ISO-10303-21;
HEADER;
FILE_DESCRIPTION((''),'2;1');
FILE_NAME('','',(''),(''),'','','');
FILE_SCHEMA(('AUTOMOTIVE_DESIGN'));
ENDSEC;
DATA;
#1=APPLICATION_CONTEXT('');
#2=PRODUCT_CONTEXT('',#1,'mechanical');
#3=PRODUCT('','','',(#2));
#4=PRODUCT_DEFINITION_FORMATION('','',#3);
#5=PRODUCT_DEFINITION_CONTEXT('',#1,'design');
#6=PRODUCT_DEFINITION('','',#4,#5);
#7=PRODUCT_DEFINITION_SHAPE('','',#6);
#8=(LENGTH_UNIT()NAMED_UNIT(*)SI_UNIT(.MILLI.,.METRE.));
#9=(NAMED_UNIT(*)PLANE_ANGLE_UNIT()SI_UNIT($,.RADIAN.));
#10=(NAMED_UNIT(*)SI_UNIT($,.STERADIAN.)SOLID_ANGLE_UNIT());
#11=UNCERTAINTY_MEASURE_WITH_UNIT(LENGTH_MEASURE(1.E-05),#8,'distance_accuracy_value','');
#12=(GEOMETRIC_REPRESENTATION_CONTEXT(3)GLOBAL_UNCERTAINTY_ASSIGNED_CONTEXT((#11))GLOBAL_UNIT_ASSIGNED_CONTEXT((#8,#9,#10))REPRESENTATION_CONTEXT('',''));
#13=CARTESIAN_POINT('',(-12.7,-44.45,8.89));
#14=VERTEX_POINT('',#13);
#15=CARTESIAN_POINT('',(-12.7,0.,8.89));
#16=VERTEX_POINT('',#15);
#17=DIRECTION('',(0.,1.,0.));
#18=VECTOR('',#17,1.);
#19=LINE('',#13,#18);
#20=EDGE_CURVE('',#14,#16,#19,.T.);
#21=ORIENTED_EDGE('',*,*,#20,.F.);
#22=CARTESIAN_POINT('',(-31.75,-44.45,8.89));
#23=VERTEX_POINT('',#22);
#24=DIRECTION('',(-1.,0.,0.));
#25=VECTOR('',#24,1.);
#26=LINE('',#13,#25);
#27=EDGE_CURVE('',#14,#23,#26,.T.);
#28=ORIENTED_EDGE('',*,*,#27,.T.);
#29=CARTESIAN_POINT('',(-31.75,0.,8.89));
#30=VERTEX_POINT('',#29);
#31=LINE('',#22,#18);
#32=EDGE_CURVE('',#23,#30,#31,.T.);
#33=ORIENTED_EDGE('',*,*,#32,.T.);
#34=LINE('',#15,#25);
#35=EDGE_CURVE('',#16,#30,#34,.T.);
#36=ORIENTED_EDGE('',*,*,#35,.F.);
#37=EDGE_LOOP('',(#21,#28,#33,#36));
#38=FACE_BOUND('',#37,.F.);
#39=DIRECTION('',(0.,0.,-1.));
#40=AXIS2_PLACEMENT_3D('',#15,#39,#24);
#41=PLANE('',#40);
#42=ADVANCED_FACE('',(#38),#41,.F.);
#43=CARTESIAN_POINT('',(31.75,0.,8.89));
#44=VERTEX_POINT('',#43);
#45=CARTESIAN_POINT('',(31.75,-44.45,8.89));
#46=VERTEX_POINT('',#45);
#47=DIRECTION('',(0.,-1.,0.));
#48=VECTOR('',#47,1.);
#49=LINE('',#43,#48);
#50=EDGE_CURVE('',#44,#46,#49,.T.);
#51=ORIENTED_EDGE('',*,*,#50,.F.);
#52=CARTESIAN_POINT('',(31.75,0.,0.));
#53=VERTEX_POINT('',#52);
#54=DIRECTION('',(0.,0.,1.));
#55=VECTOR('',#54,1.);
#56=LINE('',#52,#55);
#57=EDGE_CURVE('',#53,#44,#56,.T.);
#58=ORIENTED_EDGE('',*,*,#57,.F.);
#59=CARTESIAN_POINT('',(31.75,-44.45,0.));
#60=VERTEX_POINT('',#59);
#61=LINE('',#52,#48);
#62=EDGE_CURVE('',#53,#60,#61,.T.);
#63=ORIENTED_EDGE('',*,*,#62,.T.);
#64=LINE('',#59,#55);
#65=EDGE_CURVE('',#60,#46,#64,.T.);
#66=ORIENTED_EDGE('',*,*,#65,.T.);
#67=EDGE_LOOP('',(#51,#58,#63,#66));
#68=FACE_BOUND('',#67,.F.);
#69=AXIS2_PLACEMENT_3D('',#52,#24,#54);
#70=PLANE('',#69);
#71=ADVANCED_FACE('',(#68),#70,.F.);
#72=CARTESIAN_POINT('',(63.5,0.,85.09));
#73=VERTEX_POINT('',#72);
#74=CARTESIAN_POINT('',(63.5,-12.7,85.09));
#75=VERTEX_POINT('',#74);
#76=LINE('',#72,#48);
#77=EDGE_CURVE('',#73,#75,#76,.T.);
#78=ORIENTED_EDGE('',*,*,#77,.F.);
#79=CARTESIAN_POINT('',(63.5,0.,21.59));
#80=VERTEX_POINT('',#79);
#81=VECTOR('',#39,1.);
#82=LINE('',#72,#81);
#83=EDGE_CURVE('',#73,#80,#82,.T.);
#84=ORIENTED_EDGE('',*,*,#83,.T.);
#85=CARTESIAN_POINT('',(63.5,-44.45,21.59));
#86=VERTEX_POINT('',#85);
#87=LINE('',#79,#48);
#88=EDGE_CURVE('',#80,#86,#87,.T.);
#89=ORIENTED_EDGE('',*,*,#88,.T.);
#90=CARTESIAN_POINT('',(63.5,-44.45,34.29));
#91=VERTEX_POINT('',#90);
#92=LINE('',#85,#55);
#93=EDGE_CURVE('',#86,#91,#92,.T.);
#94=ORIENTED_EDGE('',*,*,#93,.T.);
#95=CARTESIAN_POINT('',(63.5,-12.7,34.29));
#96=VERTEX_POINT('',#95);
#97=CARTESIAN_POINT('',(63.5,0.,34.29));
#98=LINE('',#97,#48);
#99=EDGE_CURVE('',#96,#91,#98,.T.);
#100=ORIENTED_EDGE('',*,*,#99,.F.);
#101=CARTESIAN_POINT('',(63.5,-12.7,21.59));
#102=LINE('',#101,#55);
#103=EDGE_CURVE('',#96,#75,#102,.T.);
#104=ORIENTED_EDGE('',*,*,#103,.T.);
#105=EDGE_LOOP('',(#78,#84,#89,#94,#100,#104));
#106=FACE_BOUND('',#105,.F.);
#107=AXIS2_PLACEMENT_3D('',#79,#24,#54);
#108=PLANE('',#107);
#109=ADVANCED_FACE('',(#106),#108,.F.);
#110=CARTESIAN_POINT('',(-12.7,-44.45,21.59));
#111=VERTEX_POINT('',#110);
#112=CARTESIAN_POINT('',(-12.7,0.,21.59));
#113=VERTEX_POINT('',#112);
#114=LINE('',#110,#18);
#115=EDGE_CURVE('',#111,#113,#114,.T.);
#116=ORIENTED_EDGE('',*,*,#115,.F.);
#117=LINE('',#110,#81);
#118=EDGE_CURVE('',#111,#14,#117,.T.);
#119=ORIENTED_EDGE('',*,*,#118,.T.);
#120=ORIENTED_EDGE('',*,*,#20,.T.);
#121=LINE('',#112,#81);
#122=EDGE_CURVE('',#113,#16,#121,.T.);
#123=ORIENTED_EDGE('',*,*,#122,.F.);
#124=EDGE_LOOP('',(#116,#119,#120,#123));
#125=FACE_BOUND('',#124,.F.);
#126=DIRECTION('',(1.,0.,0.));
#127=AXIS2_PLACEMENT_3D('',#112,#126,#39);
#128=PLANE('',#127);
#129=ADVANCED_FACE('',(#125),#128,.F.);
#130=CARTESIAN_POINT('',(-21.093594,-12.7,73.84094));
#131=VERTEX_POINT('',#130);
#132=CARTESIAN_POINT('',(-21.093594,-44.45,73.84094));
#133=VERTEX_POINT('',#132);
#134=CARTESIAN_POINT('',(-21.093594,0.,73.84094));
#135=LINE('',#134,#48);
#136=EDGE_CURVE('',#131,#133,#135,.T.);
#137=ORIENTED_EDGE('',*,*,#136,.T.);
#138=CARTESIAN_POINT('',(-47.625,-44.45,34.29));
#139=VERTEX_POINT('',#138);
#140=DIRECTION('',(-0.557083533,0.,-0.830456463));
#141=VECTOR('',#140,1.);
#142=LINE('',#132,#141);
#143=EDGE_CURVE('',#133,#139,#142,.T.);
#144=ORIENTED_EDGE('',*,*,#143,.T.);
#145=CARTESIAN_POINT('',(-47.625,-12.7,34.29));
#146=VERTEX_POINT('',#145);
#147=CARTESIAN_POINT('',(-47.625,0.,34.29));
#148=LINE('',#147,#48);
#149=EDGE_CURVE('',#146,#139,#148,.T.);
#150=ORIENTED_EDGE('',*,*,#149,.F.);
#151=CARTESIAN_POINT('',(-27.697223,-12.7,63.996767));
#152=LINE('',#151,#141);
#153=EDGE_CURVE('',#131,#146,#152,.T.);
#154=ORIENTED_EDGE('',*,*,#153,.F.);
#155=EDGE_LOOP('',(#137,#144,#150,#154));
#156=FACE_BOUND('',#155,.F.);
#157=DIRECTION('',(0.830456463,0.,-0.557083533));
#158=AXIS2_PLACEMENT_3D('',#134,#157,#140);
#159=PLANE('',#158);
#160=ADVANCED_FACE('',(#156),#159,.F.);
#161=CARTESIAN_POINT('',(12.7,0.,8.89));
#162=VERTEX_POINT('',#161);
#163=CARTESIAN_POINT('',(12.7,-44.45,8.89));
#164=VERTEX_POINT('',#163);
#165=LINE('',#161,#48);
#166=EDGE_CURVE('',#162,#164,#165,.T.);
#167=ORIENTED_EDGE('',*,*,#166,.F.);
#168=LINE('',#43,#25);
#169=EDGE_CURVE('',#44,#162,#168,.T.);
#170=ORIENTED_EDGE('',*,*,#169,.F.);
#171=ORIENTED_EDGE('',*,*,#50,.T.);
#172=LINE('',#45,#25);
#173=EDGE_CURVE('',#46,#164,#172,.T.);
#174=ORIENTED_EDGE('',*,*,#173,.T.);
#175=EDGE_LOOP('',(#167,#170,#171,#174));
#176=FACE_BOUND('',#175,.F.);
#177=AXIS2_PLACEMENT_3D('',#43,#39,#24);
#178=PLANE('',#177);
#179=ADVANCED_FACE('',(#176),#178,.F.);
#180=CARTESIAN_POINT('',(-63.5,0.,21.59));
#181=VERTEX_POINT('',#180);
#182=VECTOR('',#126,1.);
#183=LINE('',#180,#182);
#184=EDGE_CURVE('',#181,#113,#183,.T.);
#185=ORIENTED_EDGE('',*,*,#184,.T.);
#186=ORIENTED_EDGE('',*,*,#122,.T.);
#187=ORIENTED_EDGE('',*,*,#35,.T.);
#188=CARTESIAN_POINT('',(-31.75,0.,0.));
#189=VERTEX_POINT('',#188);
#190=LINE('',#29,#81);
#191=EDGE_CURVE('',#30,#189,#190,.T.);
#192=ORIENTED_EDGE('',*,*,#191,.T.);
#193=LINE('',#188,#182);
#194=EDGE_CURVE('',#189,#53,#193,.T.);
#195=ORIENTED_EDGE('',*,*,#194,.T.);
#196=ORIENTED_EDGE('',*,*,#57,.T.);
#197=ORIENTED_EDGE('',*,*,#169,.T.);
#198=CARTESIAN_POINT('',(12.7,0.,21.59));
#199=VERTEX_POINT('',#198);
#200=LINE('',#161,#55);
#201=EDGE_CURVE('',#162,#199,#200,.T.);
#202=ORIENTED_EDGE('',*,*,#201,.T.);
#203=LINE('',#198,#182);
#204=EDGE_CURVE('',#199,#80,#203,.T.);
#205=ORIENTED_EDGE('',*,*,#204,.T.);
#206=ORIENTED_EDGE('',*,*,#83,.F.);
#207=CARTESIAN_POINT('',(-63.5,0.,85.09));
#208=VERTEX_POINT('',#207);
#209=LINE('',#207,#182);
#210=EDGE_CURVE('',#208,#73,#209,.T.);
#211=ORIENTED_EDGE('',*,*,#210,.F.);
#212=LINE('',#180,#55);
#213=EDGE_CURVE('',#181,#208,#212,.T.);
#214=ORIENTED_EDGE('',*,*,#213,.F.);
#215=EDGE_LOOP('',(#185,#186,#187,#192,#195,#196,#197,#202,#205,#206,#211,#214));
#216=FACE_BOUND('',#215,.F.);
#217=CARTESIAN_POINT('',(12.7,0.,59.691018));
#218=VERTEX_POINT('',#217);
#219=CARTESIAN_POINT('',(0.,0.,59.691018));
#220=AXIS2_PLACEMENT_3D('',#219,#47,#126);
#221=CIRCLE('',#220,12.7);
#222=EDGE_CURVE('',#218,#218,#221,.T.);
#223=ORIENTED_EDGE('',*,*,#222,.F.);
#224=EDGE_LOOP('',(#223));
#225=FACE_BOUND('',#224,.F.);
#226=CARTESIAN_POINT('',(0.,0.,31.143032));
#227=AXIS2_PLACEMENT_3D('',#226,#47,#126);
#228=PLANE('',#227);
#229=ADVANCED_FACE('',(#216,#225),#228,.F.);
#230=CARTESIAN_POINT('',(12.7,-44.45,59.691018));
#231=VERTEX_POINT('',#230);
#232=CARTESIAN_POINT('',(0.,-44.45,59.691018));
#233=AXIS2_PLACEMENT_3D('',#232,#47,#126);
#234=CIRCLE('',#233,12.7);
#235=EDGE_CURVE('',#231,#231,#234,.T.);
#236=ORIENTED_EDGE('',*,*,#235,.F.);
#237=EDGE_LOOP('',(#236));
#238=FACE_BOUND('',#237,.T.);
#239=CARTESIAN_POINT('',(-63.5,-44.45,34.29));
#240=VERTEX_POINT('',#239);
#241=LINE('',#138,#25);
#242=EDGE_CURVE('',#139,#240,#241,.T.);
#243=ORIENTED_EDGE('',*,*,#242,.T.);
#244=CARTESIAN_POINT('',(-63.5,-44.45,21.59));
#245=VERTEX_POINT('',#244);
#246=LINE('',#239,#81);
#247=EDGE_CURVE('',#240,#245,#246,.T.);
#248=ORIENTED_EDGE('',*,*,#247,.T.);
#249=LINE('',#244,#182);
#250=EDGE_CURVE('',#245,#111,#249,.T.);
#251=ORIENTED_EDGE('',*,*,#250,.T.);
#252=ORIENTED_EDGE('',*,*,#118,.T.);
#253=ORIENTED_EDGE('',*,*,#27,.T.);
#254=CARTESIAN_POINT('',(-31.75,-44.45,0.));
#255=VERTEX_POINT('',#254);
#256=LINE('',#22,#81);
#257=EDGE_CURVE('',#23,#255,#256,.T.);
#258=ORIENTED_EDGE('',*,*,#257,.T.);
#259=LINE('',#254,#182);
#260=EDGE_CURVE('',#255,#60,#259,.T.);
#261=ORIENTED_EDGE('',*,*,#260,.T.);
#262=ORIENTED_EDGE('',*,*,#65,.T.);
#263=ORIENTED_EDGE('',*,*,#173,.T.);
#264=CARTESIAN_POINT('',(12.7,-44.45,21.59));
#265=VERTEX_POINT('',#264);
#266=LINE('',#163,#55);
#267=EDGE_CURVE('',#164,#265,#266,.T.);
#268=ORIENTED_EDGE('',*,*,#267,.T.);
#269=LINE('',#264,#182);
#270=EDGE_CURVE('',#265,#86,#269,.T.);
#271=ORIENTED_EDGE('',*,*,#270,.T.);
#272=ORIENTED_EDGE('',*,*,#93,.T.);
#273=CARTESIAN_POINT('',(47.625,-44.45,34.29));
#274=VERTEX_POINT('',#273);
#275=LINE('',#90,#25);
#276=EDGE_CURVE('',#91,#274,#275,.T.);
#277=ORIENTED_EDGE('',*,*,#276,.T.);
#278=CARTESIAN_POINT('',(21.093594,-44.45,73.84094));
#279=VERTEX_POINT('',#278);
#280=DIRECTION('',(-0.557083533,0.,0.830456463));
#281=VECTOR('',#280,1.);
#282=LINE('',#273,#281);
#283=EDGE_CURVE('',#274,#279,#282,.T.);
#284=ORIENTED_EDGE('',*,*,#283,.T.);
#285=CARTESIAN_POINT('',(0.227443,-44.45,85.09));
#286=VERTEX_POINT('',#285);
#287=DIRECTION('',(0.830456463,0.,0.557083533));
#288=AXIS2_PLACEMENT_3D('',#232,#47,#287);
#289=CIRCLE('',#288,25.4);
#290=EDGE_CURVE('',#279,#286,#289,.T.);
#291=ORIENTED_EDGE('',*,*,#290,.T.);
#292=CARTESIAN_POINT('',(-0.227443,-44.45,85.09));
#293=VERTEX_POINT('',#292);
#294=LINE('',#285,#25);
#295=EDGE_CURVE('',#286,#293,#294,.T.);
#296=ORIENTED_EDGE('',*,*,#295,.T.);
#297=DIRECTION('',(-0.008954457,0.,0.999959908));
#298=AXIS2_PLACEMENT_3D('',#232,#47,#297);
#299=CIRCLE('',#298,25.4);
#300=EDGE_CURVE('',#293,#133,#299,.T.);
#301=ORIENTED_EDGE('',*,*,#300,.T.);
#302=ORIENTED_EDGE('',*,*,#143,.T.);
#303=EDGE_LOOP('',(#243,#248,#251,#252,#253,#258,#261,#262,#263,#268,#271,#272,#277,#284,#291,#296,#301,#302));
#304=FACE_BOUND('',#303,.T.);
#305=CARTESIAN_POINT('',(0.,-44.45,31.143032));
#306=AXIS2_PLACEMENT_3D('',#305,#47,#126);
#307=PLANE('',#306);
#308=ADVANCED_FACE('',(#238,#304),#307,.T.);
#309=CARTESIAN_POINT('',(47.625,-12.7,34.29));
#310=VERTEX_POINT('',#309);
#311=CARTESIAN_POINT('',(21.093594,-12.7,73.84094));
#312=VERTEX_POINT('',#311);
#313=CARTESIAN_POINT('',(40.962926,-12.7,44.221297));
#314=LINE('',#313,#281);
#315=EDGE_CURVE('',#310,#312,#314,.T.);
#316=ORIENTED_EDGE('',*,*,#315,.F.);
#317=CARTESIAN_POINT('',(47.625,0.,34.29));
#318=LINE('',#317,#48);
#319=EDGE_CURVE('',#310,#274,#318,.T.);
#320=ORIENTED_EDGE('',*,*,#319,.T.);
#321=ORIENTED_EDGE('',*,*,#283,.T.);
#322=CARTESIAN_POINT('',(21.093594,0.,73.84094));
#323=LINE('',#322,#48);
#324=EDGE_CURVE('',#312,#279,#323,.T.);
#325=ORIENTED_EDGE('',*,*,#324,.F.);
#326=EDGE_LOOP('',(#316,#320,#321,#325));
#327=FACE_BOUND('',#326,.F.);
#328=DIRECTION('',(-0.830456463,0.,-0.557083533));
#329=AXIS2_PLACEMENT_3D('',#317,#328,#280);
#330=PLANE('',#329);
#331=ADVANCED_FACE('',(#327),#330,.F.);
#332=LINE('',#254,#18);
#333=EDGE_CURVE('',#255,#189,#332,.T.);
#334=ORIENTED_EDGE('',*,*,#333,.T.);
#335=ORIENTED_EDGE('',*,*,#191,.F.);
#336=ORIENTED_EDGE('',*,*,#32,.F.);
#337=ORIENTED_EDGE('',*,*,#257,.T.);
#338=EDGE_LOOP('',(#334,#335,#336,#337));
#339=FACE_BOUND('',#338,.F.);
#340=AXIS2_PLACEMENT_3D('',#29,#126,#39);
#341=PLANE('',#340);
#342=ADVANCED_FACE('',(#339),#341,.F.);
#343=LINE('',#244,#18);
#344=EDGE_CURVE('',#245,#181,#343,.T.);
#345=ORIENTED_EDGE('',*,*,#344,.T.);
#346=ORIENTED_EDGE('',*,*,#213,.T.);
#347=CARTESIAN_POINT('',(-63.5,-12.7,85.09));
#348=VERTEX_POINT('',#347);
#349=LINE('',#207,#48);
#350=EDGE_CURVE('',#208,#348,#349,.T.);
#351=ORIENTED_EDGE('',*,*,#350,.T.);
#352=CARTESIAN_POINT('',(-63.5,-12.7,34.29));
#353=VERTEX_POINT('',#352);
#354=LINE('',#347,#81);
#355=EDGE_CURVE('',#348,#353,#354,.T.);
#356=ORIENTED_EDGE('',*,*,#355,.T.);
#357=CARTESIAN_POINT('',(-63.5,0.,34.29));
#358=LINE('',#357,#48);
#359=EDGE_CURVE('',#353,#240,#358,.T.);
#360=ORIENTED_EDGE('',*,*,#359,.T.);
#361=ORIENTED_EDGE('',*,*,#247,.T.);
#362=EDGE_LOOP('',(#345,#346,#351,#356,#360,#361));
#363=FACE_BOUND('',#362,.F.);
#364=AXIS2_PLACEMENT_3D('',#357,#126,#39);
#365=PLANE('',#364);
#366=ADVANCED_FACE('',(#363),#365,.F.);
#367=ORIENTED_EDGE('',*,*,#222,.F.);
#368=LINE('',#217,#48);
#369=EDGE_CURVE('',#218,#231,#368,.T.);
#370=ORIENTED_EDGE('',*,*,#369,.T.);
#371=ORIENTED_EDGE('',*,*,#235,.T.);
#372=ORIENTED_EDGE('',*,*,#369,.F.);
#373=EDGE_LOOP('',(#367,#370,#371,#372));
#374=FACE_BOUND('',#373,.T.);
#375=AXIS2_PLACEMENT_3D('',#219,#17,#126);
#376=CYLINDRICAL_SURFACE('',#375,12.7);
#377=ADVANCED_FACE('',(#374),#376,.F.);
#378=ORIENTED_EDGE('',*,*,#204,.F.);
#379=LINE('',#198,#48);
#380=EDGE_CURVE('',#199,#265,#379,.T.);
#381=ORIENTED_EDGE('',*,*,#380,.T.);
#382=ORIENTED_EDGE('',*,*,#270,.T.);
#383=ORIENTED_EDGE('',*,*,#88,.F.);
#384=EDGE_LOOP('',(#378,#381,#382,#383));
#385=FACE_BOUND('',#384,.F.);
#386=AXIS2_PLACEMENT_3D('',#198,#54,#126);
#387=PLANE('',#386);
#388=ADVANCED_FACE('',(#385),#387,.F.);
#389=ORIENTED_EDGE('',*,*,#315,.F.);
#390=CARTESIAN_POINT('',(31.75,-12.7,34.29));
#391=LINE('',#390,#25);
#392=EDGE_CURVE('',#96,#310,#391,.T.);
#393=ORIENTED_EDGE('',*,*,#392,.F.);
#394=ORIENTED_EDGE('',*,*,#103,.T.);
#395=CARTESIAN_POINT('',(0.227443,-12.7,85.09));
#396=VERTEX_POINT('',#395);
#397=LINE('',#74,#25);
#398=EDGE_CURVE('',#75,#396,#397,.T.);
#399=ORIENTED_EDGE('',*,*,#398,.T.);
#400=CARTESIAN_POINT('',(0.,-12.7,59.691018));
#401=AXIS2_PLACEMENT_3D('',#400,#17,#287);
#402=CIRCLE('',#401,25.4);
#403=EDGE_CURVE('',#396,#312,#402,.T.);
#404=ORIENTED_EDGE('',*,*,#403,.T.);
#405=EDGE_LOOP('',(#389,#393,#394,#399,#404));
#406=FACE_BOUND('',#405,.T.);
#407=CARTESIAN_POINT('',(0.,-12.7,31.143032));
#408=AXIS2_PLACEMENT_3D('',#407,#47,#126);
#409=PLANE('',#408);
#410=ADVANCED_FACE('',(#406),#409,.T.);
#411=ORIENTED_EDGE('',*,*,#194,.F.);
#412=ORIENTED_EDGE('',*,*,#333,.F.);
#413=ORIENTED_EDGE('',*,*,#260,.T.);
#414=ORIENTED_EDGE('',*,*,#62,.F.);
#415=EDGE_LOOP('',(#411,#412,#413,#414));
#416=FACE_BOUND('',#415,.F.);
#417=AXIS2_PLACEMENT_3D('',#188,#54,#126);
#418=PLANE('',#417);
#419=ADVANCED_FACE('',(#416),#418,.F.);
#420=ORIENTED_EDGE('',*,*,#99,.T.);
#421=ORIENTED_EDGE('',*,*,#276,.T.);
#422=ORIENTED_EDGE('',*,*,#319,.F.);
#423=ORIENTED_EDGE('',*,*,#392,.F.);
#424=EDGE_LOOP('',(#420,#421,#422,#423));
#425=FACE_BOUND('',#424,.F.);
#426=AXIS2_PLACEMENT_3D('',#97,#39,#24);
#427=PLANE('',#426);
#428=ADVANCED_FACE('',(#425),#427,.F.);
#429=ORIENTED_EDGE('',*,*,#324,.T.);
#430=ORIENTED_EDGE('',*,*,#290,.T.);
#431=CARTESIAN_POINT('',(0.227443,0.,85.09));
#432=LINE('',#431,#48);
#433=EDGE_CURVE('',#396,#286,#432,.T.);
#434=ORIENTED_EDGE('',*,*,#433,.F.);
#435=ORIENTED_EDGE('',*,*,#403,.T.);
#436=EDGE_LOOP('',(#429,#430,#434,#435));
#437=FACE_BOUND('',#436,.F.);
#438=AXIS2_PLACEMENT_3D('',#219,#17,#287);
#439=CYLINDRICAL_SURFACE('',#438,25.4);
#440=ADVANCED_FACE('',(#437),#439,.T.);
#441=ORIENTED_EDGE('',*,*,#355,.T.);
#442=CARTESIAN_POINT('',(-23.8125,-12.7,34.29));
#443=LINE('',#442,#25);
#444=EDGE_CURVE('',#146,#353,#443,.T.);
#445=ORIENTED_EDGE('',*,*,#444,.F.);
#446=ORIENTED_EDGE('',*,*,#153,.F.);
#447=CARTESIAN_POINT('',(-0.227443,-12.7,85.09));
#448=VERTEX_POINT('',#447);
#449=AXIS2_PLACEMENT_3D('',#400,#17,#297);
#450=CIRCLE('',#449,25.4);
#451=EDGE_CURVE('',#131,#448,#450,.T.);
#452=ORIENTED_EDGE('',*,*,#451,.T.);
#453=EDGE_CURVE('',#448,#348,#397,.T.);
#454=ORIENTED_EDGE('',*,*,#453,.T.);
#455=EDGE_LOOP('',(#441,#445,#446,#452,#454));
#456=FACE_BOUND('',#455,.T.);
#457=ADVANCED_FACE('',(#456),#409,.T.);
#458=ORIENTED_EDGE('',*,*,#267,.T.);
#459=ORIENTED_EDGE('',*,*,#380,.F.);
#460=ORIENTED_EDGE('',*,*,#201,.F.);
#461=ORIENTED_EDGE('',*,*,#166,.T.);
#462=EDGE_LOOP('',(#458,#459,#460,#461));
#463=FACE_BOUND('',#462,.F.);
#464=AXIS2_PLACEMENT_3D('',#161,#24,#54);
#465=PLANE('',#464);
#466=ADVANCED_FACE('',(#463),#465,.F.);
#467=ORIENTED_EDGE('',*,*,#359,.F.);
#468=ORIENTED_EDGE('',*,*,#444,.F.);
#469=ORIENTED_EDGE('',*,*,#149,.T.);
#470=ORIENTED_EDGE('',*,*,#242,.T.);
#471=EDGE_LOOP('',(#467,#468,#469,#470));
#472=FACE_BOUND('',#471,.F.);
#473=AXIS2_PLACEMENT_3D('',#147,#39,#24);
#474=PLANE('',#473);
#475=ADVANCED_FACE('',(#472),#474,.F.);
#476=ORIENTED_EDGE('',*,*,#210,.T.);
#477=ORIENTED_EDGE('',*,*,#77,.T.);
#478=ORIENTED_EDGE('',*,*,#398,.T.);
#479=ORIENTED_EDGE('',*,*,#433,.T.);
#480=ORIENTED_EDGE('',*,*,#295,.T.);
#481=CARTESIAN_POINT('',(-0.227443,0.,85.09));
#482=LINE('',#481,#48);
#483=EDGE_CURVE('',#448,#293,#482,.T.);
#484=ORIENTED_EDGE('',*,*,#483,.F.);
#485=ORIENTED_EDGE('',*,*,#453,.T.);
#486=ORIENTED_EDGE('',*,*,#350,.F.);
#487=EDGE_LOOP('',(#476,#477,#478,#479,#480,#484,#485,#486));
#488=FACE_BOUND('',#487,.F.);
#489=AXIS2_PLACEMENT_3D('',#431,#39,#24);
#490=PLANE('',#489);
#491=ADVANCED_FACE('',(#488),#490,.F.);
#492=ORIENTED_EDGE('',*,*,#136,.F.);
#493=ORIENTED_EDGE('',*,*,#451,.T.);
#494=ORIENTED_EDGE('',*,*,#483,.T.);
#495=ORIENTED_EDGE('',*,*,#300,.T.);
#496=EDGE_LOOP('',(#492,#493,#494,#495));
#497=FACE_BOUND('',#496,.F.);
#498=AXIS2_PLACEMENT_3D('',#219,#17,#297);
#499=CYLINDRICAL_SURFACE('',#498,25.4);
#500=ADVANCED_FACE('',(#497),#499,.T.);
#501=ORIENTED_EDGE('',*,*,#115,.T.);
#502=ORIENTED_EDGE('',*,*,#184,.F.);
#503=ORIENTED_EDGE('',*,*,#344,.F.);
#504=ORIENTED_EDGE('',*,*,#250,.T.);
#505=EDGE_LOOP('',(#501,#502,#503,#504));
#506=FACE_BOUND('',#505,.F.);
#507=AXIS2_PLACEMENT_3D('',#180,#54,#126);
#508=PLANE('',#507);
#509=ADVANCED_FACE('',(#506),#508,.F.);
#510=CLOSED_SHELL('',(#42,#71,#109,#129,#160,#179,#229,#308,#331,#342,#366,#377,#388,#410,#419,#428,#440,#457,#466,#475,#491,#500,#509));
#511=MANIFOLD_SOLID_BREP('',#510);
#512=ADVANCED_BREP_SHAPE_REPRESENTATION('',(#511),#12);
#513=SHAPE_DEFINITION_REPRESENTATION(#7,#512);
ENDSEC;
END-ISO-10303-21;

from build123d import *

# Parameters (mm, degrees)
F0_R     = 12.7
F1_DEPTH = 44.45
F2_DEPTH = 12.7


with BuildPart() as f1:
    # F0 (on Front) → F1 (new body)
    with BuildSketch(Plane.XZ):
        with BuildLine():
            Line((-31.75, 0), (0, 0))
            Line((0, 0), (31.75, 0))
            Line((31.75, 0), (31.75, 8.89))
            Line((31.75, 8.89), (12.7, 8.89))
            Line((12.7, 8.89), (12.7, 21.59))
            Line((12.7, 21.59), (63.5, 21.59))
            Line((63.5, 21.59), (63.5, 34.29))
            Line((63.5, 34.29), (47.625, 34.29))
            Line((47.625, 34.29), (21.0935941582, 73.8409400841))
            ThreePointArc((21.0935941582, 73.8409400841), (12.0532981257, 82.0489700372), (0.2274431955, 85.09))
            Line((0.2274431955, 85.09), (-0.2274431955, 85.09))
            ThreePointArc((-0.2274431955, 85.09), (-12.0532981257, 82.0489700372), (-21.0935941582, 73.8409400841))
            Line((-21.0935941582, 73.8409400841), (-47.625, 34.29))
            Line((-47.625, 34.29), (-63.5, 34.29))
            Line((-63.5, 34.29), (-63.5, 21.59))
            Line((-63.5, 21.59), (-12.7, 21.59))
            Line((-12.7, 21.59), (-12.7, 8.89))
            Line((-12.7, 8.89), (-31.75, 8.89))
            Line((-31.75, 8.89), (-31.75, 0))
        make_face()
        with Locations((0, 59.6910183355)):
            Circle(F0_R, mode=Mode.SUBTRACT)
    extrude(amount=F1_DEPTH)

    # F0 (on Front) → F2 (join)
    with BuildSketch(Plane.XZ):
        with BuildLine():
            Line((-31.75, 0), (0, 0))
            Line((0, 0), (31.75, 0))
            Line((31.75, 0), (31.75, 8.89))
            Line((31.75, 8.89), (12.7, 8.89))
            Line((12.7, 8.89), (12.7, 21.59))
            Line((12.7, 21.59), (63.5, 21.59))
            Line((63.5, 21.59), (63.5, 34.29))
            Line((63.5, 34.29), (47.625, 34.29))
            Line((47.625, 34.29), (21.0935941582, 73.8409400841))
            ThreePointArc((21.0935941582, 73.8409400841), (12.0532981257, 82.0489700372), (0.2274431955, 85.09))
            Line((0.2274431955, 85.09), (-0.2274431955, 85.09))
            ThreePointArc((-0.2274431955, 85.09), (-12.0532981257, 82.0489700372), (-21.0935941582, 73.8409400841))
            Line((-21.0935941582, 73.8409400841), (-47.625, 34.29))
            Line((-47.625, 34.29), (-63.5, 34.29))
            Line((-63.5, 34.29), (-63.5, 21.59))
            Line((-63.5, 21.59), (-12.7, 21.59))
            Line((-12.7, 21.59), (-12.7, 8.89))
            Line((-12.7, 8.89), (-31.75, 8.89))
            Line((-31.75, 8.89), (-31.75, 0))
        make_face()
        with Locations((0, 59.6910183355)):
            Circle(F0_R, mode=Mode.SUBTRACT)
        with BuildLine():
            Line((47.625, 34.29), (63.5, 34.29))
            Line((63.5, 34.29), (63.5, 85.09))
            Line((63.5, 85.09), (0.2274431955, 85.09))
            ThreePointArc((0.2274431955, 85.09), (12.0532981257, 82.0489700372), (21.0935941582, 73.8409400841))
            Line((21.0935941582, 73.8409400841), (47.625, 34.29))
        make_face()
        with BuildLine():
            Line((-63.5, 85.09), (-63.5, 34.29))
            Line((-63.5, 34.29), (-47.625, 34.29))
            Line((-47.625, 34.29), (-21.0935941582, 73.8409400841))
            ThreePointArc((-21.0935941582, 73.8409400841), (-12.0532981257, 82.0489700372), (-0.2274431955, 85.09))
            Line((-0.2274431955, 85.09), (-63.5, 85.09))
        make_face()
    extrude(amount=F2_DEPTH)


solid = f1.part
